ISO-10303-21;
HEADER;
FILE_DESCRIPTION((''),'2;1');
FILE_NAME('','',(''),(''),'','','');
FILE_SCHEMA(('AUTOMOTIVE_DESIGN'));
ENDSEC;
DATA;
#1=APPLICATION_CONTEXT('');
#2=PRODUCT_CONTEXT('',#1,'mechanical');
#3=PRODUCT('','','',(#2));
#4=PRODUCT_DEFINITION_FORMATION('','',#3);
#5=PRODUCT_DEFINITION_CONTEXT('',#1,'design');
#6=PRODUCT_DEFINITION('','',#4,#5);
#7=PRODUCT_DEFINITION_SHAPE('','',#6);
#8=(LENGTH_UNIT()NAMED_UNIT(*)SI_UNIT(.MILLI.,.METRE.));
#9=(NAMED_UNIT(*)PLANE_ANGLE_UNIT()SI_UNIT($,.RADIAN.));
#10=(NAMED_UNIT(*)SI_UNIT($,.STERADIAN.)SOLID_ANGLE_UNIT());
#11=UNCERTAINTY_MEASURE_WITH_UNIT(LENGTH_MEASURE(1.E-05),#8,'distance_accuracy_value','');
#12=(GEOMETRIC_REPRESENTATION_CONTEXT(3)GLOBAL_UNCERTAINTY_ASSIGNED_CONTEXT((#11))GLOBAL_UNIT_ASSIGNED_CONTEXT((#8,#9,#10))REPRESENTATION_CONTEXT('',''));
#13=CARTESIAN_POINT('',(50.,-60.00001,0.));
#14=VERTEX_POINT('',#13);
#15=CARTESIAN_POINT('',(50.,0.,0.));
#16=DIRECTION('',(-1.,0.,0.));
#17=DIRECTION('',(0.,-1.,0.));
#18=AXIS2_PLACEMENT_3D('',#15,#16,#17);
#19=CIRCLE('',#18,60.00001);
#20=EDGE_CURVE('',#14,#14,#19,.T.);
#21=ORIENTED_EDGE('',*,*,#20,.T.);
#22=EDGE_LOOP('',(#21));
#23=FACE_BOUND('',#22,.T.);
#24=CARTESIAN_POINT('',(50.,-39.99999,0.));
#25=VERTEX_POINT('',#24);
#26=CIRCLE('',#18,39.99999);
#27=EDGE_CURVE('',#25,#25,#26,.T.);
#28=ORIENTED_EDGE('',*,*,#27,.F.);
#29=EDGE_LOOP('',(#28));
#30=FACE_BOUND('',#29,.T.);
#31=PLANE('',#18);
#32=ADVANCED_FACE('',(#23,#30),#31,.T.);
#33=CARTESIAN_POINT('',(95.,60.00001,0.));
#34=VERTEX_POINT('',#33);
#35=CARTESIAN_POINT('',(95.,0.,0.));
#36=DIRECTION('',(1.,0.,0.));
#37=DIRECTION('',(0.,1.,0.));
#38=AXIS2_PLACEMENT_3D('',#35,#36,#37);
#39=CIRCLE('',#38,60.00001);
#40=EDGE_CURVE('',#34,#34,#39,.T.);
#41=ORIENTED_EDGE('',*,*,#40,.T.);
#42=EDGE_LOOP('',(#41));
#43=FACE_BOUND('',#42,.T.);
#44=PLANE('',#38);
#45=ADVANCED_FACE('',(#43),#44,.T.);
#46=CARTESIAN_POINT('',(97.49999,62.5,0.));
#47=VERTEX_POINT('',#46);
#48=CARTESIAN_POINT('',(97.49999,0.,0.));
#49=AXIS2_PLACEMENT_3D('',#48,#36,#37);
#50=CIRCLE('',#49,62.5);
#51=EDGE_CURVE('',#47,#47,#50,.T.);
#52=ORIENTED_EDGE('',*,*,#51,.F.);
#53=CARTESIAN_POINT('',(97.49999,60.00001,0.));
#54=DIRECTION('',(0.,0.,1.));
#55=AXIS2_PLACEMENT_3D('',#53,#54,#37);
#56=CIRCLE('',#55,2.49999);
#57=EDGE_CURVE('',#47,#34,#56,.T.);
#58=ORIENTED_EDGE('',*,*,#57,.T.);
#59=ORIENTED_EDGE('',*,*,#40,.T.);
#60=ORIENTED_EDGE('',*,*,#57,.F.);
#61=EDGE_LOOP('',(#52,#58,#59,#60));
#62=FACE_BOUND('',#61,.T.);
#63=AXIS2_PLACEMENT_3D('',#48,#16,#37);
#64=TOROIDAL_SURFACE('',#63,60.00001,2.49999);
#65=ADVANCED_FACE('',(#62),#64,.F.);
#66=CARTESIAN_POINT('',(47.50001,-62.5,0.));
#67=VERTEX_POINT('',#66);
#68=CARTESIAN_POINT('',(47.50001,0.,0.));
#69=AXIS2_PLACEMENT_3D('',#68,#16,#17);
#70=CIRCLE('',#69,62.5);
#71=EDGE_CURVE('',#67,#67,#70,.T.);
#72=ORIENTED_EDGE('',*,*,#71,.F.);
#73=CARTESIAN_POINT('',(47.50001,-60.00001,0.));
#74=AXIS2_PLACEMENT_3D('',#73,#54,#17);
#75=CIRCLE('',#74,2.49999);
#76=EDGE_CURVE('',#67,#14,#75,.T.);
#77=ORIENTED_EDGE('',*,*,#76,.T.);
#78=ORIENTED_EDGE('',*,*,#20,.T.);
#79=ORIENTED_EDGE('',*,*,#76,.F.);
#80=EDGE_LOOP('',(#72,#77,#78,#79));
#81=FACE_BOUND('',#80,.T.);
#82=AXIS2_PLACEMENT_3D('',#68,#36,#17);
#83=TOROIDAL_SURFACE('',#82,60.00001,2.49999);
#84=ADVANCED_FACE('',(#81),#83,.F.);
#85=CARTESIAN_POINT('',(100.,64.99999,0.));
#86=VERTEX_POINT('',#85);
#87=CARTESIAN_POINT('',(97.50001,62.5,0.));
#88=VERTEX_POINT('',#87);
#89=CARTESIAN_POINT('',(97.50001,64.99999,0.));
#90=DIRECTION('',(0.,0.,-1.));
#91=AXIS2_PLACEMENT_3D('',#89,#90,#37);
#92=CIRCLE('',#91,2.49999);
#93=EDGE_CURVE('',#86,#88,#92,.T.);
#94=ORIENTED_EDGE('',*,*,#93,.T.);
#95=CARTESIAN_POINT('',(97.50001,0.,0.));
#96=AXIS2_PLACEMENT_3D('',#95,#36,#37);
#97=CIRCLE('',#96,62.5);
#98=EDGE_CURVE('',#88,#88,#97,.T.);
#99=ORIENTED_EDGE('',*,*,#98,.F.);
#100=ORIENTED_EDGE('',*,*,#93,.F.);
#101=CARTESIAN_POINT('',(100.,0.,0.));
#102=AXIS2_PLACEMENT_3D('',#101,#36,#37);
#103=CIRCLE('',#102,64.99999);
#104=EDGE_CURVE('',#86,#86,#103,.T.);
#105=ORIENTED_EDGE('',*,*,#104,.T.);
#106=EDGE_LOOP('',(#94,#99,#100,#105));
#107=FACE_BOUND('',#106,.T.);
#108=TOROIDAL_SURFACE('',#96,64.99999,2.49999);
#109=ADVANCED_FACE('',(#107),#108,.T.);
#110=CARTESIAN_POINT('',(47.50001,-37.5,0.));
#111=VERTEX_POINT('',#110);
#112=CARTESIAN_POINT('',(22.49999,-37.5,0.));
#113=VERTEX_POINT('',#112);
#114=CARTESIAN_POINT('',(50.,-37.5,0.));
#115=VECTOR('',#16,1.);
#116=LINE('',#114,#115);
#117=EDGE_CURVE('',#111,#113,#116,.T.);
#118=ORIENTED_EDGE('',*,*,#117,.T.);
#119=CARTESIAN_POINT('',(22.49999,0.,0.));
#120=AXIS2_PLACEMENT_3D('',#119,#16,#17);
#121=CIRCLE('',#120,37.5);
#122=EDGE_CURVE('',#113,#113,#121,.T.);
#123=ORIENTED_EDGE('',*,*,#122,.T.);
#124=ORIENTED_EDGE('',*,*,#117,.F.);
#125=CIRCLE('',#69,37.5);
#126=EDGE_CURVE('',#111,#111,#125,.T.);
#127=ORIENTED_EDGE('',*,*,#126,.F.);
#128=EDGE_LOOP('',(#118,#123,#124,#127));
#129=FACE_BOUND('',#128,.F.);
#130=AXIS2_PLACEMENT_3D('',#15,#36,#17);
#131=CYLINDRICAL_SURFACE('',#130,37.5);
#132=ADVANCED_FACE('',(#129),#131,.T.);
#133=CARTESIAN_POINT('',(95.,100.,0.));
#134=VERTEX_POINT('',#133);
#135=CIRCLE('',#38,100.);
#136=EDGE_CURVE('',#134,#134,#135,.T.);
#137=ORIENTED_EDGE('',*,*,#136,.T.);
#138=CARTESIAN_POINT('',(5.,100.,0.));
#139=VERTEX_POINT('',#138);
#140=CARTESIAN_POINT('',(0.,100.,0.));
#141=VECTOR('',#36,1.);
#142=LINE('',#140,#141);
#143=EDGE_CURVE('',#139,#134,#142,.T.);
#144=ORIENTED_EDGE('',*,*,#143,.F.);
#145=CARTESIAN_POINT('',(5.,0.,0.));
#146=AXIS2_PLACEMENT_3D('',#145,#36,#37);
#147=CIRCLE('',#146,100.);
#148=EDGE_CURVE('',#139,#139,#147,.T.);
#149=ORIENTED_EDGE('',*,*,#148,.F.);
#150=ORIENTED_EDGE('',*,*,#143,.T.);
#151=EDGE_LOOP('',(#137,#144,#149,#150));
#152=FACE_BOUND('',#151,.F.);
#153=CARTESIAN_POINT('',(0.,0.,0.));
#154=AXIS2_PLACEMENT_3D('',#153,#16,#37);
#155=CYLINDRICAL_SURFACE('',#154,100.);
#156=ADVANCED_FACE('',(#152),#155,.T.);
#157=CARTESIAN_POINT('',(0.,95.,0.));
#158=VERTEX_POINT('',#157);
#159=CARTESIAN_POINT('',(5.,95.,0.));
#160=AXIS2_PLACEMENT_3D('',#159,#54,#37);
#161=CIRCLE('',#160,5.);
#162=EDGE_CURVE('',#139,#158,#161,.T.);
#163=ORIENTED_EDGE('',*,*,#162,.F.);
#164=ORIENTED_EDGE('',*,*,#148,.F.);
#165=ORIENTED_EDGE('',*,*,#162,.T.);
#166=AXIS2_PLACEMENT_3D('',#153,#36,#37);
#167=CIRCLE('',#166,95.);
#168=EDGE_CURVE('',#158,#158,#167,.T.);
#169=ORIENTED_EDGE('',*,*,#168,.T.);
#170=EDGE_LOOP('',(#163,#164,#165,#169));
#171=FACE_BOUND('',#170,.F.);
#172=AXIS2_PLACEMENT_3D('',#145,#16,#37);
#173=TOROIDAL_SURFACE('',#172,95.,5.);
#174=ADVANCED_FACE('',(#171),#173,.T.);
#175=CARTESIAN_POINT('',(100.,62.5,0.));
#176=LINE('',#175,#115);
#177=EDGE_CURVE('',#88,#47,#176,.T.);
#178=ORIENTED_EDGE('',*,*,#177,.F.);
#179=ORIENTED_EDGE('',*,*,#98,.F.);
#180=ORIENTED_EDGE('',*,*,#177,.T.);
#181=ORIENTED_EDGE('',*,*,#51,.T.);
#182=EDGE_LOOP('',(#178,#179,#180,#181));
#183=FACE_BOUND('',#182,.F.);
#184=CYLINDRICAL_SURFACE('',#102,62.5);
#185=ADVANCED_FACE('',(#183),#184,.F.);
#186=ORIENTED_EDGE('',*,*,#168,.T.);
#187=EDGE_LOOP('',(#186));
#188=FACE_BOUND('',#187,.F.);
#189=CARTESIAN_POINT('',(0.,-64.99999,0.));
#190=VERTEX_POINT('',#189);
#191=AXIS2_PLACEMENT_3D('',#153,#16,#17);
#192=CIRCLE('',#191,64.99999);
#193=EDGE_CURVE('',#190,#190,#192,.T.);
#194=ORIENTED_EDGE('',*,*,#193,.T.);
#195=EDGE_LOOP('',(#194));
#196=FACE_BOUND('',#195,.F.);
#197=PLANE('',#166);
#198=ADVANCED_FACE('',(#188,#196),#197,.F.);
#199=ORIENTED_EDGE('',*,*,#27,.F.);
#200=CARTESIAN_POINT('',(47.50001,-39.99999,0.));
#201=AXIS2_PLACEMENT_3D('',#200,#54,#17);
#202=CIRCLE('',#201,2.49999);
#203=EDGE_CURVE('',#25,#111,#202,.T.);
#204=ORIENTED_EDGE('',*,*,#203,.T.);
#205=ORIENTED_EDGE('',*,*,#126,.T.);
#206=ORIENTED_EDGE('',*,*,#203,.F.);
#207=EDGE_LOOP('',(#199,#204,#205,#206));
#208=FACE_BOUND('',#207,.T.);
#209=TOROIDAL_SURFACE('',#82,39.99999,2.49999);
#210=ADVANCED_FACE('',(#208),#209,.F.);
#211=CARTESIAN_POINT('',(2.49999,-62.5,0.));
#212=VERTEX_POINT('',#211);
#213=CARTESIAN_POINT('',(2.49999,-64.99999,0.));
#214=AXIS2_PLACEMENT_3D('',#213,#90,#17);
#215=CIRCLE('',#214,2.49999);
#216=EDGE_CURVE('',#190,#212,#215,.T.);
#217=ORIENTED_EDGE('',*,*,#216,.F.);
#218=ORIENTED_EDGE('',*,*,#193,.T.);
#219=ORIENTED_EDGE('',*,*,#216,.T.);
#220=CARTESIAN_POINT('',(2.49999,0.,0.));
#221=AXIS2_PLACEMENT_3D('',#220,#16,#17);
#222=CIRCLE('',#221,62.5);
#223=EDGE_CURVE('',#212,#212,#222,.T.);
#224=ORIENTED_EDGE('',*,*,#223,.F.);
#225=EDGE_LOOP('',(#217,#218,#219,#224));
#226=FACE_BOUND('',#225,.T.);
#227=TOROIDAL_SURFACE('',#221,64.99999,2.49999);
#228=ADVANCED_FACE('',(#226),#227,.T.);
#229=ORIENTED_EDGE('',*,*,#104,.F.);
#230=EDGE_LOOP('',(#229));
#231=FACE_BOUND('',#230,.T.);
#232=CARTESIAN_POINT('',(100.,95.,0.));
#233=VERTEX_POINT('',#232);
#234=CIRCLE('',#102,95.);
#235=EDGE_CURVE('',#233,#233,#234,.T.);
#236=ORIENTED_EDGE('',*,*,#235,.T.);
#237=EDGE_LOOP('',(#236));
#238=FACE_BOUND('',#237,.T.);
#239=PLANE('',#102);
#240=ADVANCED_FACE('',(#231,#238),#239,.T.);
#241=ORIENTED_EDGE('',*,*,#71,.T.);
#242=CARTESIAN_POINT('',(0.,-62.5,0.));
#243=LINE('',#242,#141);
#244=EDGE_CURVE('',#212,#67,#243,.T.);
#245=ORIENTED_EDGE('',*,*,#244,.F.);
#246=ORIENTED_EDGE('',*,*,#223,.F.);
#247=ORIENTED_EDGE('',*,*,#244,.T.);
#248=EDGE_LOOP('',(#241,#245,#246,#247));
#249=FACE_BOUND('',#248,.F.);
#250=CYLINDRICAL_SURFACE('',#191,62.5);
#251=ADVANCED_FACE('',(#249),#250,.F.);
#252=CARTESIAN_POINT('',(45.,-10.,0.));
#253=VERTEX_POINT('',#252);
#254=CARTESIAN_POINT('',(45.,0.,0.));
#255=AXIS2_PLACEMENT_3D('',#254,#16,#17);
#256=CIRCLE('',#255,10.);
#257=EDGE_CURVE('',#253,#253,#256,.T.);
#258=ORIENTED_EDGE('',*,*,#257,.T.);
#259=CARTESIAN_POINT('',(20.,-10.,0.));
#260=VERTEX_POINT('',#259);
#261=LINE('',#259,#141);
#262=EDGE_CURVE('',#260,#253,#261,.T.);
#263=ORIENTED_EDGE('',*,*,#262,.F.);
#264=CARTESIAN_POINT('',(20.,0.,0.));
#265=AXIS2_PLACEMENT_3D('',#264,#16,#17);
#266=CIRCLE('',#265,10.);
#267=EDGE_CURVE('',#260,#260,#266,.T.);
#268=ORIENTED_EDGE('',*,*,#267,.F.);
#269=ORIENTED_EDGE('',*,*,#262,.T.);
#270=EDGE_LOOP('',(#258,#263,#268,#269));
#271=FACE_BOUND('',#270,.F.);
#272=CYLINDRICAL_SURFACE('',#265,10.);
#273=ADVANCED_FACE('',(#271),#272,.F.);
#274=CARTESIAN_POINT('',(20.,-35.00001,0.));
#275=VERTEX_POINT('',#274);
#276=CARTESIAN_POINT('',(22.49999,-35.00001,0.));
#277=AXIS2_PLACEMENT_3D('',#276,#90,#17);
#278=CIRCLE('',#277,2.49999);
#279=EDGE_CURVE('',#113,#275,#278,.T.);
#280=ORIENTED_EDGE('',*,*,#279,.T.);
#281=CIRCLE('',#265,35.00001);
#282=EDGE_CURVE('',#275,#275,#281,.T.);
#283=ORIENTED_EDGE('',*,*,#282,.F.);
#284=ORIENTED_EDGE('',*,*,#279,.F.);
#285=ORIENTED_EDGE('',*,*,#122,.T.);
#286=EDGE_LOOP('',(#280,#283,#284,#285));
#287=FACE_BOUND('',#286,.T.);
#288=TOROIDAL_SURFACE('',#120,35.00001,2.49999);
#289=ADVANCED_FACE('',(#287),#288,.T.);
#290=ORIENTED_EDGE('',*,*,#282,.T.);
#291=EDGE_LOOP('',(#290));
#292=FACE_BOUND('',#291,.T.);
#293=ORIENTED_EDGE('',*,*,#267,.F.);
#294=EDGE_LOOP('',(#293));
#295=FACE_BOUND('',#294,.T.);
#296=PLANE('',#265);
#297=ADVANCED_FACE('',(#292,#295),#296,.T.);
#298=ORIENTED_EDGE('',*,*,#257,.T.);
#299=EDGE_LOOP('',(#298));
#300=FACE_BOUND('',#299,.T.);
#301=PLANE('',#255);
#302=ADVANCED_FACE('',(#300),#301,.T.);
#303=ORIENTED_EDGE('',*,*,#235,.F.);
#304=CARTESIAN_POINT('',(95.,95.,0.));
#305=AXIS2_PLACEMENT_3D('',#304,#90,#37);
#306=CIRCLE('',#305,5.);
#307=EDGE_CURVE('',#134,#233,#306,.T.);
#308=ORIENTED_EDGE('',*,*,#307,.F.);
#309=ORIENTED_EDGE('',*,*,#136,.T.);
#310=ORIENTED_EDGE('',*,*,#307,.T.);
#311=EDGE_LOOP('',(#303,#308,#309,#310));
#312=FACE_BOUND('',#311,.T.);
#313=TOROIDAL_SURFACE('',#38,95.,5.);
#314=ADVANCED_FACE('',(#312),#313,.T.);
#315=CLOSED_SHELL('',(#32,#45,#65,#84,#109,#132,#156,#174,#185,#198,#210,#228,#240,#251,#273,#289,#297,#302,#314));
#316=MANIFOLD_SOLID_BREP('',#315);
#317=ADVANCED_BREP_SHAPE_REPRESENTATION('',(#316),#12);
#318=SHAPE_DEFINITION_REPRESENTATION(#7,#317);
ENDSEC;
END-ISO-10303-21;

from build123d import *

# Parameters (mm, degrees)
F0_R      = 100
F1_DEPTH  = 100
F2_R      = 62.5
F3_DEPTH  = 50
F4_R      = 62.5
F5_DEPTH  = 5
F6_R      = 5
F7_R      = 37.5
F8_DEPTH  = 30
F9_R      = 10
F10_DEPTH = 25
F11_R     = 2.49999


# Not quite as in the source:
# - a fillet or chamfer is up to 0.001 mm smaller than in the source, because OpenCascade refuses the exact size


with BuildPart() as f1:
    # F0 (on Right) → F1 (new body)
    with BuildSketch(Plane.YZ):
        Circle(F0_R)
    extrude(amount=F1_DEPTH)

    # F2 (on face) → F3 (cut)
    with BuildSketch(Plane(origin=(0, 0, 0), x_dir=(0, -1, 0), z_dir=(-1, 0, 0))):
        Circle(F2_R)
    extrude(amount=-F3_DEPTH, mode=Mode.SUBTRACT)

    # F4 (on face) → F5 (cut)
    with BuildSketch(Plane.YZ.offset(100)):
        Circle(F4_R)
    extrude(amount=-F5_DEPTH, mode=Mode.SUBTRACT)

    # F6
    f6_edges = [f1.edges().sort_by_distance(p)[0] for p in [
        (0, -100, 0),
        (100, -100, 0),
    ]]
    fillet(f6_edges, radius=F6_R)

    # F7 (on face) → F8 (join)
    with BuildSketch(Plane(origin=(50, 0, 0), x_dir=(0, -1, 0), z_dir=(-1, 0, 0))):
        Circle(F7_R)
    extrude(amount=F8_DEPTH)

    # F9 (on face) → F10 (cut)
    with BuildSketch(Plane(origin=(20, 0, 0), x_dir=(0, -1, 0), z_dir=(-1, 0, 0))):
        Circle(F9_R)
    extrude(amount=-F10_DEPTH, mode=Mode.SUBTRACT)

    # F11 (radius 2.5 in the source; OpenCascade refuses exactly that, so slightly less here)
    f11_edges = [f1.edges().sort_by_distance(p)[0] for p in [
        (0, 62.5, 0),
        (50, 62.5, 0),
        (50, 37.5, 0),
        (20, 37.5, 0),
        (100, -62.5, 0),
        (95, -62.5, 0),
    ]]
    fillet(f11_edges, radius=F11_R)


solid = f1.part
